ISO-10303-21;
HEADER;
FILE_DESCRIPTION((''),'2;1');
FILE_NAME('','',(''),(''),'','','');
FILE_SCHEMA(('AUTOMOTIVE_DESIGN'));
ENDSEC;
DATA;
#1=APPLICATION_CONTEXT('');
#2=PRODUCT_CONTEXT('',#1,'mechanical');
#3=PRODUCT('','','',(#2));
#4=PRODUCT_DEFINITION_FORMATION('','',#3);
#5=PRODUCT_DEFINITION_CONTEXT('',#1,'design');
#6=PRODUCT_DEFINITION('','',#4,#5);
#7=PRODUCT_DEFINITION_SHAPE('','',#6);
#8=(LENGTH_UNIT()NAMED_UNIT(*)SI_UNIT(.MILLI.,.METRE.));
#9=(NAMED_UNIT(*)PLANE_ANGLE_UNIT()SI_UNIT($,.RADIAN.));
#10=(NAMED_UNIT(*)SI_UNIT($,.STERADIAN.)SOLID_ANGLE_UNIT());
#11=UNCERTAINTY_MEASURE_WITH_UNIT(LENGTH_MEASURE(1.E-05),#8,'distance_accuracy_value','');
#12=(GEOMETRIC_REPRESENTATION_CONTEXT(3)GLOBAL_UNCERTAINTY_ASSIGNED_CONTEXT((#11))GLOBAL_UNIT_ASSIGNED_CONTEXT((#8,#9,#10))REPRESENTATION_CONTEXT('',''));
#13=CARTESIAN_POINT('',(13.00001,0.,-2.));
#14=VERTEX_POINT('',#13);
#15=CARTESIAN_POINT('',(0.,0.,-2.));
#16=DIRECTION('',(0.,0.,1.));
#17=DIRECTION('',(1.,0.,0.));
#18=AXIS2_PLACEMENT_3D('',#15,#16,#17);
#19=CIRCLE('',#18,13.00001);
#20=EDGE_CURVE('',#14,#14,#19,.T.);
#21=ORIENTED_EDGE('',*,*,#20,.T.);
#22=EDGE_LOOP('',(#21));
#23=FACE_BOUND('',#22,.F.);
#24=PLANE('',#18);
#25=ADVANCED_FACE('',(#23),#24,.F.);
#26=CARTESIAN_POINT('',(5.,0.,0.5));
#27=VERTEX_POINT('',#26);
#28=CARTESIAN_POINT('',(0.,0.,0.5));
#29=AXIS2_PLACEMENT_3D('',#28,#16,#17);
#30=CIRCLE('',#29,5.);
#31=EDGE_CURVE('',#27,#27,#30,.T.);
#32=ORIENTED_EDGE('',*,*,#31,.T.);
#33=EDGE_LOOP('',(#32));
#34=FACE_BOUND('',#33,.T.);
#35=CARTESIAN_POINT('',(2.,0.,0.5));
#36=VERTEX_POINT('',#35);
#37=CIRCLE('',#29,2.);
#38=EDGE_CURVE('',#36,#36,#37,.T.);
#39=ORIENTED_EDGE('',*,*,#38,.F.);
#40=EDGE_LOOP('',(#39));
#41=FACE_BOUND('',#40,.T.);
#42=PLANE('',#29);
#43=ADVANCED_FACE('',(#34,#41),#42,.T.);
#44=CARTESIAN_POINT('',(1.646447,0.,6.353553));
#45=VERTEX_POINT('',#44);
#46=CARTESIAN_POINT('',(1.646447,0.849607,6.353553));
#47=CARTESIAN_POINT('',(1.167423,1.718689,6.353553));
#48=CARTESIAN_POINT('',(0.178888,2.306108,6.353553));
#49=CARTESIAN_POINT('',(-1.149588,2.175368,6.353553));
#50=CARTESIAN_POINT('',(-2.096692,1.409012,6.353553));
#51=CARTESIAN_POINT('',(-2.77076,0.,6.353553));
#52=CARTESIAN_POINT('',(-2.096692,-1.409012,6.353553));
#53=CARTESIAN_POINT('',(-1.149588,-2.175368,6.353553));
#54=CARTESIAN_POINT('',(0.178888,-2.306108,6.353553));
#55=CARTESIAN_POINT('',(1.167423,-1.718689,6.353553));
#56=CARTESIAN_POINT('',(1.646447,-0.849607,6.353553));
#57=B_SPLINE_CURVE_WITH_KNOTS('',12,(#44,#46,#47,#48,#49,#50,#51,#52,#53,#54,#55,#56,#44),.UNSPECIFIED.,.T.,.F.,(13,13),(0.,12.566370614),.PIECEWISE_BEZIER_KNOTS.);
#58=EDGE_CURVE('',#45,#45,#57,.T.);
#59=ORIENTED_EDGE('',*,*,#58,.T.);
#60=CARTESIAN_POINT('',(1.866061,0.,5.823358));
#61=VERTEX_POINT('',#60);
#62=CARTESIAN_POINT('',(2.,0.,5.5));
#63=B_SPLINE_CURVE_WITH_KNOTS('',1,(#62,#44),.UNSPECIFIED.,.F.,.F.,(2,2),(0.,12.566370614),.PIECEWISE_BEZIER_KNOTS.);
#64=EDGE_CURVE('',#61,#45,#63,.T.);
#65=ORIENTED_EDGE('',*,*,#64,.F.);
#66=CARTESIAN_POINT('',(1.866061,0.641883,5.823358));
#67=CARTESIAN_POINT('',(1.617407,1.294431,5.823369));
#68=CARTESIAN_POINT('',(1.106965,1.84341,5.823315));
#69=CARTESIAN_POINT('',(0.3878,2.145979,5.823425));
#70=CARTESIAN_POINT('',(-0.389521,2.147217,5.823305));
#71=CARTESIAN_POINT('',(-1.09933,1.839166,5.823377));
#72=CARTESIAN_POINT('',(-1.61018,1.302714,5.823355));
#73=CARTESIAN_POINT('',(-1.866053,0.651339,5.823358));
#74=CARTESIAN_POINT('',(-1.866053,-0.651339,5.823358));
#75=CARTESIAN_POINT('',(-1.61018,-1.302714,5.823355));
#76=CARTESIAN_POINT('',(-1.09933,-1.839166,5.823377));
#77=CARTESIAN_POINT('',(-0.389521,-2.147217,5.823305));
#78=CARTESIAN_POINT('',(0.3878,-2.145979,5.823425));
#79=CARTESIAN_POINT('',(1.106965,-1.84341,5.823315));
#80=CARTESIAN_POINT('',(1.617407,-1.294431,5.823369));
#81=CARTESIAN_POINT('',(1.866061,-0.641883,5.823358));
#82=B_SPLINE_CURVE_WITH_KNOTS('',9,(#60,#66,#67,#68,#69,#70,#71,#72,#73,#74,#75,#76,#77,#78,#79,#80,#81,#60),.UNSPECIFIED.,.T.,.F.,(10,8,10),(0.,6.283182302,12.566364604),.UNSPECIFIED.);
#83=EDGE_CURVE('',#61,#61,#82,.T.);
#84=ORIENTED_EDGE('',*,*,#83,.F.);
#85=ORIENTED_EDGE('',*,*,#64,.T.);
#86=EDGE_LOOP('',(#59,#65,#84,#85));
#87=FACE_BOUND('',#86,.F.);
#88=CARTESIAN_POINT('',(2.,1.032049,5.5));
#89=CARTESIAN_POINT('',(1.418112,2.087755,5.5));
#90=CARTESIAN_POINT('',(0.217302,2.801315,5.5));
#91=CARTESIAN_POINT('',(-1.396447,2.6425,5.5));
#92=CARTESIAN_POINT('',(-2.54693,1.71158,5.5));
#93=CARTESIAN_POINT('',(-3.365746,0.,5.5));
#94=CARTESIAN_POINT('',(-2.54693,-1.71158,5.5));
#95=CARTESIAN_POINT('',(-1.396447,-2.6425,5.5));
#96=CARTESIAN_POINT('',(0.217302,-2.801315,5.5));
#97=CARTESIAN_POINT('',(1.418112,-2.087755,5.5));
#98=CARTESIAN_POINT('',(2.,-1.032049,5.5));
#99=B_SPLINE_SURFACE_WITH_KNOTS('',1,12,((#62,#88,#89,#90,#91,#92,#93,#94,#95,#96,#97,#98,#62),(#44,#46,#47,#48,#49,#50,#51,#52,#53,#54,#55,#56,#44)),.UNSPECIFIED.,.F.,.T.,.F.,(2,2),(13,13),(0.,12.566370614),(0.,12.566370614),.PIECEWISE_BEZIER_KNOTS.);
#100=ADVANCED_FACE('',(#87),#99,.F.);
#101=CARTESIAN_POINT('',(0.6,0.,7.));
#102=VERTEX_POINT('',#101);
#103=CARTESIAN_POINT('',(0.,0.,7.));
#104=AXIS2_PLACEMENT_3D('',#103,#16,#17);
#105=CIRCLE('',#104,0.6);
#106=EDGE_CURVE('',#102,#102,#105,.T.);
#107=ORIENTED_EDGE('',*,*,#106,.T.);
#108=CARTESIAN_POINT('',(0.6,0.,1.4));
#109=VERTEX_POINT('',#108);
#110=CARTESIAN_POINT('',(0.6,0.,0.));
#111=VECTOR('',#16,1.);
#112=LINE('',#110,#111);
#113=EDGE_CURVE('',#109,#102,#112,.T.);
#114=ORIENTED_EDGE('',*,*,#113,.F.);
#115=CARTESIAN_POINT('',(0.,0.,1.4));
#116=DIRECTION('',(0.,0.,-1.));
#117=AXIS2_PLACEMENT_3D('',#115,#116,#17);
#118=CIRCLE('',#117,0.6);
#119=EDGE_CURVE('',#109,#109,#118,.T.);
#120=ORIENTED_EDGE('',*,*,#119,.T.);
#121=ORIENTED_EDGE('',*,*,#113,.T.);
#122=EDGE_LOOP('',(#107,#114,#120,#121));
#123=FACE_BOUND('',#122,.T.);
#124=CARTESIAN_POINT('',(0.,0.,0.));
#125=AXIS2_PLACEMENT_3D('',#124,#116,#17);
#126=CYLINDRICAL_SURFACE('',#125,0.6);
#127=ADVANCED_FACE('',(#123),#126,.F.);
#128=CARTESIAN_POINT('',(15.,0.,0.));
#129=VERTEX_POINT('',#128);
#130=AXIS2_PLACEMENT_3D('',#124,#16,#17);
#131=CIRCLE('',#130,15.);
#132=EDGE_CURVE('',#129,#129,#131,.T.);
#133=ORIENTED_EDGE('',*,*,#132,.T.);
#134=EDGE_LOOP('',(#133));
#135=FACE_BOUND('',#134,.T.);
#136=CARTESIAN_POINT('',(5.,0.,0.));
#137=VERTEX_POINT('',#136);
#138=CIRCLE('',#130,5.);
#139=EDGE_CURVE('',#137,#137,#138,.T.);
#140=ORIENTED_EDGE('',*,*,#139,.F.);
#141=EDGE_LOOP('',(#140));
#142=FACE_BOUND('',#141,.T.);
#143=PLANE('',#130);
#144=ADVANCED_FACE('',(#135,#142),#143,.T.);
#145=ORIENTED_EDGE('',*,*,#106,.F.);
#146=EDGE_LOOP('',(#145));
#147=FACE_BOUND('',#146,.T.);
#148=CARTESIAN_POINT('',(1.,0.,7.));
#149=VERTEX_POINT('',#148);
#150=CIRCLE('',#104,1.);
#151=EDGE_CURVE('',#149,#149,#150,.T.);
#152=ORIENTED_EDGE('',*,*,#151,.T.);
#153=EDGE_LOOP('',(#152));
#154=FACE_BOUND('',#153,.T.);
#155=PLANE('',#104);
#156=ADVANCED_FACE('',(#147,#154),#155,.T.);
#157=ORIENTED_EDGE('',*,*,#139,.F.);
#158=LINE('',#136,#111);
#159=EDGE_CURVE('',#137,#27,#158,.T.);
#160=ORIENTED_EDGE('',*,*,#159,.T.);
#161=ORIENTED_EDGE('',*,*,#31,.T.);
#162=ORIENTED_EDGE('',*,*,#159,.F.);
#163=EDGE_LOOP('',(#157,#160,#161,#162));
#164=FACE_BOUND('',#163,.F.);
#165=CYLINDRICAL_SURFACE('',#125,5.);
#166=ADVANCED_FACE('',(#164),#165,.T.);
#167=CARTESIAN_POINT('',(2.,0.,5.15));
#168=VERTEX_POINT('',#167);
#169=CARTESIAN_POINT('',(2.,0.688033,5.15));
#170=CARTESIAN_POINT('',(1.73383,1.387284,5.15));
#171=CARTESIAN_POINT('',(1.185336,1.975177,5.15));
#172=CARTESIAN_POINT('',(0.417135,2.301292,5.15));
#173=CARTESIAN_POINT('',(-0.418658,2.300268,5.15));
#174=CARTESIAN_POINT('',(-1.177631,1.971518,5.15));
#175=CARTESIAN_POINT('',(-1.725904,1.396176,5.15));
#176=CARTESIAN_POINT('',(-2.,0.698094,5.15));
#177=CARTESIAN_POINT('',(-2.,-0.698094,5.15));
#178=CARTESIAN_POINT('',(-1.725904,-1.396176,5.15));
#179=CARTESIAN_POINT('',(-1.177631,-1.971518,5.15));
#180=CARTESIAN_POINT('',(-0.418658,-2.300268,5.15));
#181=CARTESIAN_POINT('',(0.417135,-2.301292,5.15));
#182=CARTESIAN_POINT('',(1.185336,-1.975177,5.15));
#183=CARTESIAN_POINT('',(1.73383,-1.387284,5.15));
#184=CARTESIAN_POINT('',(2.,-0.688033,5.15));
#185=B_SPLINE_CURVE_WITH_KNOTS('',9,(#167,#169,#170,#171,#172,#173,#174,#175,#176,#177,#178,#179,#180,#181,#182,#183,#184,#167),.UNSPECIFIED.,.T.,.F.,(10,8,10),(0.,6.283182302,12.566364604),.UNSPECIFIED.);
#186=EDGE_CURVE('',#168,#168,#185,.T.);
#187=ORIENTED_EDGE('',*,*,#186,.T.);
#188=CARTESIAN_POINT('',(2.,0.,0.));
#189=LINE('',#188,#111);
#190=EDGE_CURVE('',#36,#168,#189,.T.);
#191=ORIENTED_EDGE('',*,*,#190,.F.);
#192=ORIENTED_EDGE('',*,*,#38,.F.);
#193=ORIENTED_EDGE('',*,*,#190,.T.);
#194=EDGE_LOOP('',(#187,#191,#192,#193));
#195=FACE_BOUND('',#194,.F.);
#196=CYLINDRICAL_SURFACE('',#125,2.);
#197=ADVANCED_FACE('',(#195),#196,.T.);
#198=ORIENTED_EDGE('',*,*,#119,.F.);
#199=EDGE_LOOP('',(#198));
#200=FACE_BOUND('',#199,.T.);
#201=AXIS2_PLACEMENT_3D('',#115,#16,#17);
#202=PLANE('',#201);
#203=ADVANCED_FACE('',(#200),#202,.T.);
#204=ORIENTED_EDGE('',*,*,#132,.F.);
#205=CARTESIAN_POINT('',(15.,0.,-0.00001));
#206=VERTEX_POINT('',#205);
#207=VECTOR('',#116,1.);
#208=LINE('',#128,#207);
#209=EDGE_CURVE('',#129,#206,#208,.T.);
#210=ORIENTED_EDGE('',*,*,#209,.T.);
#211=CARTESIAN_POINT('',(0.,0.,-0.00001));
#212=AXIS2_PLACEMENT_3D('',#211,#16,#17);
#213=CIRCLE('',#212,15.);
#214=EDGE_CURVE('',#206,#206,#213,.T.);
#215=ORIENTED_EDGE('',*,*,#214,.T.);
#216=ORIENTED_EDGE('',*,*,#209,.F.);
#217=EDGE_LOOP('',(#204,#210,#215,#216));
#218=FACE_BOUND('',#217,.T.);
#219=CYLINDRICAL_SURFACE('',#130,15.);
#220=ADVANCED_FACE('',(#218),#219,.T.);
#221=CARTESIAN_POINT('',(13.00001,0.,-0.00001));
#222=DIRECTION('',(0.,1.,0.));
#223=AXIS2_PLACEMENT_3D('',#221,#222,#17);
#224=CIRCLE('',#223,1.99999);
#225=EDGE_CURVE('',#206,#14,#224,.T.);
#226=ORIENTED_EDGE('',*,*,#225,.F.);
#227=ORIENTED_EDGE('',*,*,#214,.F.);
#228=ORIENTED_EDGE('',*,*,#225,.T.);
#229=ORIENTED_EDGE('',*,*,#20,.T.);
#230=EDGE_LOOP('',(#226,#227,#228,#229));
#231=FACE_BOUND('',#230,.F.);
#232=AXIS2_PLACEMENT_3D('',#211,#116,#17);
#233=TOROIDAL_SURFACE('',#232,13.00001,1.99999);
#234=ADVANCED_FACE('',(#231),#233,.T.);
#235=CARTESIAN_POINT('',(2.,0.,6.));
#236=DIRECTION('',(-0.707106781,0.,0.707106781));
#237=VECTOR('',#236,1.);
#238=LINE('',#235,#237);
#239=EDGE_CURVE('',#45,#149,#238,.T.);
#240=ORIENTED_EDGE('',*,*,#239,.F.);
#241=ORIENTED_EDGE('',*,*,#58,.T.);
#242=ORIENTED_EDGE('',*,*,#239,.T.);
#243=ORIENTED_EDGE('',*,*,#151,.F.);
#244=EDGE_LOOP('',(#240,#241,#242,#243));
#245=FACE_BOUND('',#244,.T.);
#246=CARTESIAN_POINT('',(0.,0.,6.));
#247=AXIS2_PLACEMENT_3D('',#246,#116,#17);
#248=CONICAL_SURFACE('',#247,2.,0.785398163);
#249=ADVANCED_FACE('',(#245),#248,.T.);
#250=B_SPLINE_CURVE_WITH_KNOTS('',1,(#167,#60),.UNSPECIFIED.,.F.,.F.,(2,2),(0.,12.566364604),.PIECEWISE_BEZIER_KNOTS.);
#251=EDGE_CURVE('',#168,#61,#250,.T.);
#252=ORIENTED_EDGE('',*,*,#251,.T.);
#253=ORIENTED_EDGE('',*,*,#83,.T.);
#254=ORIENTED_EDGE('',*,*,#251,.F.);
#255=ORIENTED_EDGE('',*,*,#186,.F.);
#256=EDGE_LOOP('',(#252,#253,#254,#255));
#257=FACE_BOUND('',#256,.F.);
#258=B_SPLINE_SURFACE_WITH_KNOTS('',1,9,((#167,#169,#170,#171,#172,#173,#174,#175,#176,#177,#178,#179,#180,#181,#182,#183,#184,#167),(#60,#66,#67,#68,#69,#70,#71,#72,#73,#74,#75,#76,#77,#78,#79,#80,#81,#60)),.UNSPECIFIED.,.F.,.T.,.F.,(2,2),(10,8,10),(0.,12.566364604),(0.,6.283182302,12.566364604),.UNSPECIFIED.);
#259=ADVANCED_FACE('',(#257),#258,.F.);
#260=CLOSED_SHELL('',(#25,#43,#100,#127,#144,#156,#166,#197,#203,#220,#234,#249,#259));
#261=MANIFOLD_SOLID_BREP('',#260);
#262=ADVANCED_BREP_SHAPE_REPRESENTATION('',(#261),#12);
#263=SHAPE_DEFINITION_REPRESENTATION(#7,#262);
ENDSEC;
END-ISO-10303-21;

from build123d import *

# Parameters (mm, degrees)
F0_R      = 2
F1_DEPTH  = 7
F2_T      = -1.4
F0_R_2    = 15
F3_DEPTH  = 2
F4_R      = 1.99999
F6_SIZE   = 1
F7_SIZE   = 0.5
F8_SIZE   = 0.35
F9_R      = 5
F9_R_2    = 2
F10_DEPTH = 0.5


# Not quite as in the source:
# - a fillet or chamfer is up to 0.001 mm smaller than in the source, because OpenCascade refuses the exact size


with BuildPart() as f1:
    # F0 (on Top) → F1 (new body)
    with BuildSketch(Plane.XY):
        Circle(F0_R)
    extrude(amount=F1_DEPTH)

    # F2
    f2_openings = [f1.faces().sort_by_distance(p)[0] for p in [
        (0, 0, 7),
    ]]
    offset(amount=F2_T, openings=f2_openings)

    # F0 (on Top) → F3 (join)
    with BuildSketch(Plane.XY):
        Circle(F0_R_2)
        Circle(F0_R, mode=Mode.SUBTRACT)
        Circle(F0_R)
    extrude(amount=-F3_DEPTH)

    # F4 (radius 2 in the source; OpenCascade refuses exactly that, so slightly less here)
    f4_edges = [f1.edges().sort_by_distance(p)[0] for p in [
        (-15, 0, -2),
    ]]
    fillet(f4_edges, radius=F4_R)

    # F6
    f6_edges = [f1.edges().sort_by_distance(p)[0] for p in [
        (-2, 0, 7),
    ]]
    chamfer(f6_edges, length=F6_SIZE)

    # F7
    f7_edges = [f1.edges().sort_by_distance(p)[0] for p in [
        (-2, 0, 6),
    ]]
    chamfer(f7_edges, length=F7_SIZE)

    # F8
    f8_edges = [f1.edges().sort_by_distance(p)[0] for p in [
        (-1.999991, 0, 5.5),
    ]]
    chamfer(f8_edges, length=F8_SIZE)

    # F9 (on face) → F10 (join)
    with BuildSketch(Plane.XY):
        Circle(F9_R)
        Circle(F9_R_2, mode=Mode.SUBTRACT)
    extrude(amount=F10_DEPTH)


solid = f1.part
